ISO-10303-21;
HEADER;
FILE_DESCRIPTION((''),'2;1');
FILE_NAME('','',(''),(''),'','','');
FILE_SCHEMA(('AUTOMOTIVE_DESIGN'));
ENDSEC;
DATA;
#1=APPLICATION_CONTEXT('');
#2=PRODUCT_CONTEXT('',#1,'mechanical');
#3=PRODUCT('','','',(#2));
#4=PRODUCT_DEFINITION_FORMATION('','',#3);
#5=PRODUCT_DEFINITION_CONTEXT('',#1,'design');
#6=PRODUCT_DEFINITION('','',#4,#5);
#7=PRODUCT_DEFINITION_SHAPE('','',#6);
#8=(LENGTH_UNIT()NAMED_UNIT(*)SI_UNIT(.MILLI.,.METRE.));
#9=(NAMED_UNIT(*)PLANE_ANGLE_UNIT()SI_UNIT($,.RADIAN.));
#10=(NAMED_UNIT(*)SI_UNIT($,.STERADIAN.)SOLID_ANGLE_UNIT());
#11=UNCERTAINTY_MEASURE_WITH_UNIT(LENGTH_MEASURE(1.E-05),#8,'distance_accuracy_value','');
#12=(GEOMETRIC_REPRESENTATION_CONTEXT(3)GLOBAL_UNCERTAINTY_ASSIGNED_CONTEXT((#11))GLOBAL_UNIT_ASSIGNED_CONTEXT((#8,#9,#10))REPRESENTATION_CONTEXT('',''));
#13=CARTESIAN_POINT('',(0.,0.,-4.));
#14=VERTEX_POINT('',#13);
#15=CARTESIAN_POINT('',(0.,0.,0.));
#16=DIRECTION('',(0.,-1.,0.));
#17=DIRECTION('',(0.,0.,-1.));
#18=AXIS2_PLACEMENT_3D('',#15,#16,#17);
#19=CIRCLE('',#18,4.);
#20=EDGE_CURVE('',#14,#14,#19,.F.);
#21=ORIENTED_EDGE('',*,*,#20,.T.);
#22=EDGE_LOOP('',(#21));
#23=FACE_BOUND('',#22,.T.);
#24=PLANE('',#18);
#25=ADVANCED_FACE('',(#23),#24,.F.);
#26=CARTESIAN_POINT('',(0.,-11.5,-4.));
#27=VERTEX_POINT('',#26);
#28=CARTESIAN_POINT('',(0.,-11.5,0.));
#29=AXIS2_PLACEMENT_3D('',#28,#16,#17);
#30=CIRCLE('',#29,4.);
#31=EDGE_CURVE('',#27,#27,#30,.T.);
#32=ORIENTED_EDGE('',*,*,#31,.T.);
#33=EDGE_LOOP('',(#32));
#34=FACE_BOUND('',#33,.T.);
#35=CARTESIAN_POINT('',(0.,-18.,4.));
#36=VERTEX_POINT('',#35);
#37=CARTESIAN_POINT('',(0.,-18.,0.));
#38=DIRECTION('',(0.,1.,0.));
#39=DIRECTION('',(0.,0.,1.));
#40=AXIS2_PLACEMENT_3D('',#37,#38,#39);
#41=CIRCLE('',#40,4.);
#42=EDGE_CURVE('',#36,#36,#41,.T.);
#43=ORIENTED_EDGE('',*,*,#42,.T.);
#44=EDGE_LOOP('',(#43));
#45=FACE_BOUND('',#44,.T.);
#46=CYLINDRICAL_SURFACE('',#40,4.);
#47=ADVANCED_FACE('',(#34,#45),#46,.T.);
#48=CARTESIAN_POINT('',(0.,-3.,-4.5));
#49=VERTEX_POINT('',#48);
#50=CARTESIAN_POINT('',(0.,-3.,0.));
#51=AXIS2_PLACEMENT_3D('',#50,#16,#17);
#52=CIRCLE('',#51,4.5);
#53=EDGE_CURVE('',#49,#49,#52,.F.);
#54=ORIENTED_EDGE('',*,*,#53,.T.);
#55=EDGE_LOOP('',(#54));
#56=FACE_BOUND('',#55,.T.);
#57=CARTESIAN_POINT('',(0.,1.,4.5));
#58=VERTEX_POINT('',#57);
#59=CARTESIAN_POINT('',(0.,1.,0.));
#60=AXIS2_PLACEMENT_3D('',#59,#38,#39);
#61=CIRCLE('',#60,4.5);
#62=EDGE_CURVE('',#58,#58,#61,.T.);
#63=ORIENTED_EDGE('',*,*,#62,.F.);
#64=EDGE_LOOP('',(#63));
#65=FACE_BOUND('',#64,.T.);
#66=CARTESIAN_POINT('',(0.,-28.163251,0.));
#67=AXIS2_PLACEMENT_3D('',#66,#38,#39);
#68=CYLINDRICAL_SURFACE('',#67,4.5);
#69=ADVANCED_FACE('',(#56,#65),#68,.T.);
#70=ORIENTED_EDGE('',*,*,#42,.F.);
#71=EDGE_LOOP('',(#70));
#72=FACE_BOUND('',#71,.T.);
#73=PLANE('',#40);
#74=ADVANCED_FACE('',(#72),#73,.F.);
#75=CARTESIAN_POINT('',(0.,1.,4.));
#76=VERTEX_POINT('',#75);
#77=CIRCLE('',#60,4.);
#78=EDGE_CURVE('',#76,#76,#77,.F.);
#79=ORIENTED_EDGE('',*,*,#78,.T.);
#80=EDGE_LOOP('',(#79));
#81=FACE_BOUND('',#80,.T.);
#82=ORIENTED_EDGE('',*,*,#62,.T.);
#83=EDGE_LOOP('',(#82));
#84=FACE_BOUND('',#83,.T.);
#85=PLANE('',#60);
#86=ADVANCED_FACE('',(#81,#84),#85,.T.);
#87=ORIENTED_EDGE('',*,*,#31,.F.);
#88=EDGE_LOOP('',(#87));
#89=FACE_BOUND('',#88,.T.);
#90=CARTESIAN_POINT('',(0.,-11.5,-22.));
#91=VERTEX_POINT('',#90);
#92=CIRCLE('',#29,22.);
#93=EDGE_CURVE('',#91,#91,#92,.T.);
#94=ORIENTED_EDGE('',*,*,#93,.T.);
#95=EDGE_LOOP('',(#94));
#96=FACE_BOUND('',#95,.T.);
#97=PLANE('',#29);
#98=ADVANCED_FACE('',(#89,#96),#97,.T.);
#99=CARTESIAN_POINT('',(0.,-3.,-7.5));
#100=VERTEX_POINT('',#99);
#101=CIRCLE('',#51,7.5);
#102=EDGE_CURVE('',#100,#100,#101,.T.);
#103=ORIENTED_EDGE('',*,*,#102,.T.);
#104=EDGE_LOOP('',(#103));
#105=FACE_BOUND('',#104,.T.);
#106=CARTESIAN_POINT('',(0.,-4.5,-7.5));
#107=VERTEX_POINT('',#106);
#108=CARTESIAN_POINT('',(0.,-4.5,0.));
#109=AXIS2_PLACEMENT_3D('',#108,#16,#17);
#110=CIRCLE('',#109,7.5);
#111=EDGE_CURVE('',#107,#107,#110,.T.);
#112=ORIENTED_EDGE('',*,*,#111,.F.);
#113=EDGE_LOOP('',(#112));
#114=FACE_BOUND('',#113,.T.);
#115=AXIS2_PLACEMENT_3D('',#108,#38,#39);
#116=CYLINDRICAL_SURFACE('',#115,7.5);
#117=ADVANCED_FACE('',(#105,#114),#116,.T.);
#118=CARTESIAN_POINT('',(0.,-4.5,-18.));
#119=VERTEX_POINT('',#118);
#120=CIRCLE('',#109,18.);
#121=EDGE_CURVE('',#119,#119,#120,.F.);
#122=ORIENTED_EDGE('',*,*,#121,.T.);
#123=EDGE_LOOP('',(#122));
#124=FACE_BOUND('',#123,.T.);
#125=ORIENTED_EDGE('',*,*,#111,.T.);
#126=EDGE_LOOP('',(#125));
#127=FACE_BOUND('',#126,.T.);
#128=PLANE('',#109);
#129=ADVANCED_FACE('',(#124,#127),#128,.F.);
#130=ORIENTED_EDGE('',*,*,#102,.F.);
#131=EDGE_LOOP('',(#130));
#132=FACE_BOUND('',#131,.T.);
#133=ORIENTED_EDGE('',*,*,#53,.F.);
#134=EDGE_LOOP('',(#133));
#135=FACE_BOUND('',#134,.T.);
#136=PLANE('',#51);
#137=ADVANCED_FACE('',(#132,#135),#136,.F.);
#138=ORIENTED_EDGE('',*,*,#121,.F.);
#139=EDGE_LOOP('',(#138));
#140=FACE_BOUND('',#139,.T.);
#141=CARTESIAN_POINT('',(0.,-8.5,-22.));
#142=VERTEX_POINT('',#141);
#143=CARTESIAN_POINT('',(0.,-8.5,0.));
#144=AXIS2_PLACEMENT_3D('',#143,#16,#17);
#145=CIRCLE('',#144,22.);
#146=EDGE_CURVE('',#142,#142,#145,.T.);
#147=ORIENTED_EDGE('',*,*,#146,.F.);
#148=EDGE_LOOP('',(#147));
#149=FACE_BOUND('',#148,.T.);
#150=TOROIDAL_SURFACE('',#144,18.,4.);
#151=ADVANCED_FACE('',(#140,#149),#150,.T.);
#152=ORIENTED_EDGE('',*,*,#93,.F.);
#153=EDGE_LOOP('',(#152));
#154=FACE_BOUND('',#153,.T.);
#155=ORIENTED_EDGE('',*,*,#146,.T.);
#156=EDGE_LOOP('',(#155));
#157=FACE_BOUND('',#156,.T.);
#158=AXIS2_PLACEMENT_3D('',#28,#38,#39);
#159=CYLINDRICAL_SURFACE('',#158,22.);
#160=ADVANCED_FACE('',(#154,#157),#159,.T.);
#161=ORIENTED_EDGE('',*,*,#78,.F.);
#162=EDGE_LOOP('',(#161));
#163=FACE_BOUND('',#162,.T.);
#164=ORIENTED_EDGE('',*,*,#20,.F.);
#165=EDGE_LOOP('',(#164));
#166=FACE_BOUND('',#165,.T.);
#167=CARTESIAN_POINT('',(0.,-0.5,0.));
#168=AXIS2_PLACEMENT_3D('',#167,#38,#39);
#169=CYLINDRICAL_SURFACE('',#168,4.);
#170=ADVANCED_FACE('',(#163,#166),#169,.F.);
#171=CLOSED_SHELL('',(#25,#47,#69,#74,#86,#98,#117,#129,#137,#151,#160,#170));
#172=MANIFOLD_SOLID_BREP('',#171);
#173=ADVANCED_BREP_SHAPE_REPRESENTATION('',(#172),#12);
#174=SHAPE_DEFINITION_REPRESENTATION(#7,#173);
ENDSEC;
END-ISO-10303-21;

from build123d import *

# Parameters (mm, degrees)
BOSS_EXTRUDE1_DEPTH = 1.5
CUT_EXTRUDE1_DEPTH  = 2
SKETCH3_R           = 4
CUT_EXTRUDE2_DEPTH  = 2
SKETCH4_R           = 20
CUT_EXTRUDE3_DEPTH  = 0.5
FILLET1_R           = 1
SKETCH5_R           = 22
BOSS_EXTRUDE2_DEPTH = 3
SKETCH7_R           = 7.5
BOSS_EXTRUDE4_DEPTH = 1.5
SKETCH8_R           = 22
BOSS_EXTRUDE5_DEPTH = 7
SKETCH9_R           = 8
SKETCH9_R_2         = 6.5
CUT_EXTRUDE4_DEPTH  = 3
FILLET4_R           = 3
SKETCH10_R          = 46.144445172
SKETCH10_R_2        = 20.866025404
CUT_EXTRUDE5_DEPTH  = 6
CUT_EXTRUDE6_START  = -10
SKETCH12_R          = 20.866025404
SKETCH12_R_2        = 6.5
CUT_EXTRUDE6_DEPTH  = 10
FILLET5_R           = 4
SKETCH13_R          = 8.896552767
SKETCH13_R_2        = 4.5
CUT_EXTRUDE7_DEPTH  = 4
SKETCH14_R          = 4
BOSS_EXTRUDE7_DEPTH = 18


# Some blends are built 0.0001 mm under size
with BuildPart() as part:
    # Sketch1 → Boss-Extrude1 (new body)
    with BuildSketch(Plane(origin=(0, 0, 0), x_dir=(1, 0, 0), z_dir=(0, 1, 0))):
        with BuildLine():
            Line((-20.5, -35), (20.5, -35))
            ThreePointArc((20.5, -35), (24.035533906, -33.535533906), (25.5, -30))
            Line((25.5, -30), (25.5, 30))
            ThreePointArc((25.5, 30), (24.035533906, 33.535533906), (20.5, 35))
            Line((20.5, 35), (-20.5, 35))
            ThreePointArc((-20.5, 35), (-24.035533906, 33.535533906), (-25.5, 30))
            Line((-25.5, 30), (-25.5, -30))
            ThreePointArc((-25.5, -30), (-24.035533906, -33.535533906), (-20.5, -35))
        make_face()
    extrude(amount=BOSS_EXTRUDE1_DEPTH)

    # Sketch2 → Cut-Extrude1 (cut)
    with BuildSketch(Plane(origin=(0, 1.5, 0), x_dir=(1, 0, 0), z_dir=(0, 1, 0))):
        with BuildLine():
            Line((-21.5, 24.5), (-21.5, 28.5))
            ThreePointArc((-21.5, 28.5), (-17.5, 32.5), (-13.5, 28.5))
            Line((-13.5, 28.5), (-13.5, 24.5))
            ThreePointArc((-13.5, 24.5), (-17.5, 20.5), (-21.5, 24.5))
        make_face()
        with BuildLine():
            Line((13.5, 24.5), (13.5, 28.5))
            ThreePointArc((13.5, 28.5), (17.5, 32.5), (21.5, 28.5))
            Line((21.5, 28.5), (21.5, 24.5))
            ThreePointArc((21.5, 24.5), (17.5, 20.5), (13.5, 24.5))
        make_face()
    cut_extrude1 = extrude(amount=-CUT_EXTRUDE1_DEPTH, mode=Mode.SUBTRACT)

    # Mirror1: Cut-Extrude1 across plane
    add(cut_extrude1.mirror(Plane.XY), mode=Mode.SUBTRACT)

    # Sketch3 → Cut-Extrude2 (cut)
    with BuildSketch(Plane(origin=(0, 1.5, 0), x_dir=(1, 0, 0), z_dir=(0, 1, 0))):
        with Locations(Location((0, 0, 0), (0, 0, 270))):
            Circle(SKETCH3_R)
    extrude(amount=-CUT_EXTRUDE2_DEPTH, mode=Mode.SUBTRACT)

    # Sketch4 → Cut-Extrude3 (cut)
    with BuildSketch(Plane(origin=(0, 1.5, 0), x_dir=(1, 0, 0), z_dir=(0, 1, 0))):
        with Locations(Location((0, 0, 0), (0, 0, 270))):
            Circle(SKETCH4_R)
    extrude(amount=-CUT_EXTRUDE3_DEPTH, mode=Mode.SUBTRACT)

    # Fillet1
    # the kernel refuses this fillet: 1 mm, written as the material it takes off along each edge
    with BuildSketch(Plane(origin=(0, 1.5, 0), x_dir=(0, 0, 1), z_dir=(-1, 0, 0))) as fillet1_piece_1:
        with BuildLine():
            CenterArc((20.866025404, -1), FILLET1_R, 90, 60)
            Line((20, -0.5), (19.982679492, -0.49))
            ThreePointArc((19.982679492, -0.49), (19.98, -0.25), (19.98, 0))
            Line((19.98, 0), (20, 0.02))
            Line((20, 0.02), (20.866025404, 0.02))
            Line((20.866025404, 0.02), (20.866025404, 0))
        make_face()
    revolve(axis=Axis((0, 1.5, 0), (0, 1, 0)), mode=Mode.SUBTRACT)

    # Sketch5 → Boss-Extrude2 (add)
    with BuildSketch(Plane.XZ):
        with Locations(Location((0, 0, 0), (0, 0, 270))):
            Circle(SKETCH5_R)
    extrude(amount=BOSS_EXTRUDE2_DEPTH)

    # Sketch7 → Boss-Extrude4 (add)
    with BuildSketch(Plane.XZ.offset(3)):
        with Locations(Location((0, 0, 0), (0, 0, 270))):
            Circle(SKETCH7_R)
    extrude(amount=BOSS_EXTRUDE4_DEPTH)

    # Sketch8 → Boss-Extrude5 (add)
    with BuildSketch(Plane.XZ.offset(4.5)):
        with Locations(Location((0, 0, 0), (0, 0, 270))):
            Circle(SKETCH8_R)
    extrude(amount=BOSS_EXTRUDE5_DEPTH)

    # Sketch9 → Cut-Extrude4 (cut)
    with BuildSketch(Plane(origin=(0, 1, 0), x_dir=(1, 0, 0), z_dir=(0, 1, 0))):
        with Locations(Location((0, 0, 0), (0, 0, 270))):
            Circle(SKETCH9_R)
        with Locations(Location((0, 0, 0), (0, 0, 270))):
            Circle(SKETCH9_R_2, mode=Mode.SUBTRACT)
    extrude(amount=-CUT_EXTRUDE4_DEPTH, mode=Mode.SUBTRACT)

    # Fillet4
    fillet4_edges = [part.edges().sort_by_distance(p)[0] for p in [
        (0, 1, -8),
    ]]
    fillet(fillet4_edges, radius=FILLET4_R - 0.0001)  # a hair under: the kernel refuses the full size

    # Sketch10 → Cut-Extrude5 (cut)
    with BuildSketch(Plane(origin=(0, 1.5, 0), x_dir=(1, 0, 0), z_dir=(0, 1, 0))):
        Circle(SKETCH10_R)
        with Locations(Location((0, 0, 0), (0, 0, 270))):
            Circle(SKETCH10_R_2, mode=Mode.SUBTRACT)
    extrude(amount=-CUT_EXTRUDE5_DEPTH, mode=Mode.SUBTRACT)

    # Sketch12 → Cut-Extrude6 (cut)
    with BuildSketch(Plane.XZ.offset(3).offset(CUT_EXTRUDE6_START)):
        Circle(SKETCH12_R)
        with Locations(Location((0, 0, 0), (0, 0, 90))):
            Circle(SKETCH12_R_2, mode=Mode.SUBTRACT)
    extrude(amount=CUT_EXTRUDE6_DEPTH, mode=Mode.SUBTRACT)

    # Fillet5
    fillet5_edges = [part.edges().sort_by_distance(p)[0] for p in [
        (0, -4.5, 22),
    ]]
    fillet(fillet5_edges, radius=FILLET5_R)

    # Sketch13 → Cut-Extrude7 (cut)
    with BuildSketch(Plane(origin=(0, 1, 0), x_dir=(1, 0, 0), z_dir=(0, 1, 0))):
        Circle(SKETCH13_R)
        with Locations(Location((0, 0, 0), (0, 0, 270))):
            Circle(SKETCH13_R_2, mode=Mode.SUBTRACT)
    extrude(amount=-CUT_EXTRUDE7_DEPTH, mode=Mode.SUBTRACT)

    # Sketch14 → Boss-Extrude7 (add)
    with BuildSketch(Plane(origin=(0, 0, 0), x_dir=(1, 0, 0), z_dir=(0, 1, 0))):
        with Locations(Location((0, 0, 0), (0, 0, 270))):
            Circle(SKETCH14_R)
    extrude(amount=-BOSS_EXTRUDE7_DEPTH)


solid = part.part
